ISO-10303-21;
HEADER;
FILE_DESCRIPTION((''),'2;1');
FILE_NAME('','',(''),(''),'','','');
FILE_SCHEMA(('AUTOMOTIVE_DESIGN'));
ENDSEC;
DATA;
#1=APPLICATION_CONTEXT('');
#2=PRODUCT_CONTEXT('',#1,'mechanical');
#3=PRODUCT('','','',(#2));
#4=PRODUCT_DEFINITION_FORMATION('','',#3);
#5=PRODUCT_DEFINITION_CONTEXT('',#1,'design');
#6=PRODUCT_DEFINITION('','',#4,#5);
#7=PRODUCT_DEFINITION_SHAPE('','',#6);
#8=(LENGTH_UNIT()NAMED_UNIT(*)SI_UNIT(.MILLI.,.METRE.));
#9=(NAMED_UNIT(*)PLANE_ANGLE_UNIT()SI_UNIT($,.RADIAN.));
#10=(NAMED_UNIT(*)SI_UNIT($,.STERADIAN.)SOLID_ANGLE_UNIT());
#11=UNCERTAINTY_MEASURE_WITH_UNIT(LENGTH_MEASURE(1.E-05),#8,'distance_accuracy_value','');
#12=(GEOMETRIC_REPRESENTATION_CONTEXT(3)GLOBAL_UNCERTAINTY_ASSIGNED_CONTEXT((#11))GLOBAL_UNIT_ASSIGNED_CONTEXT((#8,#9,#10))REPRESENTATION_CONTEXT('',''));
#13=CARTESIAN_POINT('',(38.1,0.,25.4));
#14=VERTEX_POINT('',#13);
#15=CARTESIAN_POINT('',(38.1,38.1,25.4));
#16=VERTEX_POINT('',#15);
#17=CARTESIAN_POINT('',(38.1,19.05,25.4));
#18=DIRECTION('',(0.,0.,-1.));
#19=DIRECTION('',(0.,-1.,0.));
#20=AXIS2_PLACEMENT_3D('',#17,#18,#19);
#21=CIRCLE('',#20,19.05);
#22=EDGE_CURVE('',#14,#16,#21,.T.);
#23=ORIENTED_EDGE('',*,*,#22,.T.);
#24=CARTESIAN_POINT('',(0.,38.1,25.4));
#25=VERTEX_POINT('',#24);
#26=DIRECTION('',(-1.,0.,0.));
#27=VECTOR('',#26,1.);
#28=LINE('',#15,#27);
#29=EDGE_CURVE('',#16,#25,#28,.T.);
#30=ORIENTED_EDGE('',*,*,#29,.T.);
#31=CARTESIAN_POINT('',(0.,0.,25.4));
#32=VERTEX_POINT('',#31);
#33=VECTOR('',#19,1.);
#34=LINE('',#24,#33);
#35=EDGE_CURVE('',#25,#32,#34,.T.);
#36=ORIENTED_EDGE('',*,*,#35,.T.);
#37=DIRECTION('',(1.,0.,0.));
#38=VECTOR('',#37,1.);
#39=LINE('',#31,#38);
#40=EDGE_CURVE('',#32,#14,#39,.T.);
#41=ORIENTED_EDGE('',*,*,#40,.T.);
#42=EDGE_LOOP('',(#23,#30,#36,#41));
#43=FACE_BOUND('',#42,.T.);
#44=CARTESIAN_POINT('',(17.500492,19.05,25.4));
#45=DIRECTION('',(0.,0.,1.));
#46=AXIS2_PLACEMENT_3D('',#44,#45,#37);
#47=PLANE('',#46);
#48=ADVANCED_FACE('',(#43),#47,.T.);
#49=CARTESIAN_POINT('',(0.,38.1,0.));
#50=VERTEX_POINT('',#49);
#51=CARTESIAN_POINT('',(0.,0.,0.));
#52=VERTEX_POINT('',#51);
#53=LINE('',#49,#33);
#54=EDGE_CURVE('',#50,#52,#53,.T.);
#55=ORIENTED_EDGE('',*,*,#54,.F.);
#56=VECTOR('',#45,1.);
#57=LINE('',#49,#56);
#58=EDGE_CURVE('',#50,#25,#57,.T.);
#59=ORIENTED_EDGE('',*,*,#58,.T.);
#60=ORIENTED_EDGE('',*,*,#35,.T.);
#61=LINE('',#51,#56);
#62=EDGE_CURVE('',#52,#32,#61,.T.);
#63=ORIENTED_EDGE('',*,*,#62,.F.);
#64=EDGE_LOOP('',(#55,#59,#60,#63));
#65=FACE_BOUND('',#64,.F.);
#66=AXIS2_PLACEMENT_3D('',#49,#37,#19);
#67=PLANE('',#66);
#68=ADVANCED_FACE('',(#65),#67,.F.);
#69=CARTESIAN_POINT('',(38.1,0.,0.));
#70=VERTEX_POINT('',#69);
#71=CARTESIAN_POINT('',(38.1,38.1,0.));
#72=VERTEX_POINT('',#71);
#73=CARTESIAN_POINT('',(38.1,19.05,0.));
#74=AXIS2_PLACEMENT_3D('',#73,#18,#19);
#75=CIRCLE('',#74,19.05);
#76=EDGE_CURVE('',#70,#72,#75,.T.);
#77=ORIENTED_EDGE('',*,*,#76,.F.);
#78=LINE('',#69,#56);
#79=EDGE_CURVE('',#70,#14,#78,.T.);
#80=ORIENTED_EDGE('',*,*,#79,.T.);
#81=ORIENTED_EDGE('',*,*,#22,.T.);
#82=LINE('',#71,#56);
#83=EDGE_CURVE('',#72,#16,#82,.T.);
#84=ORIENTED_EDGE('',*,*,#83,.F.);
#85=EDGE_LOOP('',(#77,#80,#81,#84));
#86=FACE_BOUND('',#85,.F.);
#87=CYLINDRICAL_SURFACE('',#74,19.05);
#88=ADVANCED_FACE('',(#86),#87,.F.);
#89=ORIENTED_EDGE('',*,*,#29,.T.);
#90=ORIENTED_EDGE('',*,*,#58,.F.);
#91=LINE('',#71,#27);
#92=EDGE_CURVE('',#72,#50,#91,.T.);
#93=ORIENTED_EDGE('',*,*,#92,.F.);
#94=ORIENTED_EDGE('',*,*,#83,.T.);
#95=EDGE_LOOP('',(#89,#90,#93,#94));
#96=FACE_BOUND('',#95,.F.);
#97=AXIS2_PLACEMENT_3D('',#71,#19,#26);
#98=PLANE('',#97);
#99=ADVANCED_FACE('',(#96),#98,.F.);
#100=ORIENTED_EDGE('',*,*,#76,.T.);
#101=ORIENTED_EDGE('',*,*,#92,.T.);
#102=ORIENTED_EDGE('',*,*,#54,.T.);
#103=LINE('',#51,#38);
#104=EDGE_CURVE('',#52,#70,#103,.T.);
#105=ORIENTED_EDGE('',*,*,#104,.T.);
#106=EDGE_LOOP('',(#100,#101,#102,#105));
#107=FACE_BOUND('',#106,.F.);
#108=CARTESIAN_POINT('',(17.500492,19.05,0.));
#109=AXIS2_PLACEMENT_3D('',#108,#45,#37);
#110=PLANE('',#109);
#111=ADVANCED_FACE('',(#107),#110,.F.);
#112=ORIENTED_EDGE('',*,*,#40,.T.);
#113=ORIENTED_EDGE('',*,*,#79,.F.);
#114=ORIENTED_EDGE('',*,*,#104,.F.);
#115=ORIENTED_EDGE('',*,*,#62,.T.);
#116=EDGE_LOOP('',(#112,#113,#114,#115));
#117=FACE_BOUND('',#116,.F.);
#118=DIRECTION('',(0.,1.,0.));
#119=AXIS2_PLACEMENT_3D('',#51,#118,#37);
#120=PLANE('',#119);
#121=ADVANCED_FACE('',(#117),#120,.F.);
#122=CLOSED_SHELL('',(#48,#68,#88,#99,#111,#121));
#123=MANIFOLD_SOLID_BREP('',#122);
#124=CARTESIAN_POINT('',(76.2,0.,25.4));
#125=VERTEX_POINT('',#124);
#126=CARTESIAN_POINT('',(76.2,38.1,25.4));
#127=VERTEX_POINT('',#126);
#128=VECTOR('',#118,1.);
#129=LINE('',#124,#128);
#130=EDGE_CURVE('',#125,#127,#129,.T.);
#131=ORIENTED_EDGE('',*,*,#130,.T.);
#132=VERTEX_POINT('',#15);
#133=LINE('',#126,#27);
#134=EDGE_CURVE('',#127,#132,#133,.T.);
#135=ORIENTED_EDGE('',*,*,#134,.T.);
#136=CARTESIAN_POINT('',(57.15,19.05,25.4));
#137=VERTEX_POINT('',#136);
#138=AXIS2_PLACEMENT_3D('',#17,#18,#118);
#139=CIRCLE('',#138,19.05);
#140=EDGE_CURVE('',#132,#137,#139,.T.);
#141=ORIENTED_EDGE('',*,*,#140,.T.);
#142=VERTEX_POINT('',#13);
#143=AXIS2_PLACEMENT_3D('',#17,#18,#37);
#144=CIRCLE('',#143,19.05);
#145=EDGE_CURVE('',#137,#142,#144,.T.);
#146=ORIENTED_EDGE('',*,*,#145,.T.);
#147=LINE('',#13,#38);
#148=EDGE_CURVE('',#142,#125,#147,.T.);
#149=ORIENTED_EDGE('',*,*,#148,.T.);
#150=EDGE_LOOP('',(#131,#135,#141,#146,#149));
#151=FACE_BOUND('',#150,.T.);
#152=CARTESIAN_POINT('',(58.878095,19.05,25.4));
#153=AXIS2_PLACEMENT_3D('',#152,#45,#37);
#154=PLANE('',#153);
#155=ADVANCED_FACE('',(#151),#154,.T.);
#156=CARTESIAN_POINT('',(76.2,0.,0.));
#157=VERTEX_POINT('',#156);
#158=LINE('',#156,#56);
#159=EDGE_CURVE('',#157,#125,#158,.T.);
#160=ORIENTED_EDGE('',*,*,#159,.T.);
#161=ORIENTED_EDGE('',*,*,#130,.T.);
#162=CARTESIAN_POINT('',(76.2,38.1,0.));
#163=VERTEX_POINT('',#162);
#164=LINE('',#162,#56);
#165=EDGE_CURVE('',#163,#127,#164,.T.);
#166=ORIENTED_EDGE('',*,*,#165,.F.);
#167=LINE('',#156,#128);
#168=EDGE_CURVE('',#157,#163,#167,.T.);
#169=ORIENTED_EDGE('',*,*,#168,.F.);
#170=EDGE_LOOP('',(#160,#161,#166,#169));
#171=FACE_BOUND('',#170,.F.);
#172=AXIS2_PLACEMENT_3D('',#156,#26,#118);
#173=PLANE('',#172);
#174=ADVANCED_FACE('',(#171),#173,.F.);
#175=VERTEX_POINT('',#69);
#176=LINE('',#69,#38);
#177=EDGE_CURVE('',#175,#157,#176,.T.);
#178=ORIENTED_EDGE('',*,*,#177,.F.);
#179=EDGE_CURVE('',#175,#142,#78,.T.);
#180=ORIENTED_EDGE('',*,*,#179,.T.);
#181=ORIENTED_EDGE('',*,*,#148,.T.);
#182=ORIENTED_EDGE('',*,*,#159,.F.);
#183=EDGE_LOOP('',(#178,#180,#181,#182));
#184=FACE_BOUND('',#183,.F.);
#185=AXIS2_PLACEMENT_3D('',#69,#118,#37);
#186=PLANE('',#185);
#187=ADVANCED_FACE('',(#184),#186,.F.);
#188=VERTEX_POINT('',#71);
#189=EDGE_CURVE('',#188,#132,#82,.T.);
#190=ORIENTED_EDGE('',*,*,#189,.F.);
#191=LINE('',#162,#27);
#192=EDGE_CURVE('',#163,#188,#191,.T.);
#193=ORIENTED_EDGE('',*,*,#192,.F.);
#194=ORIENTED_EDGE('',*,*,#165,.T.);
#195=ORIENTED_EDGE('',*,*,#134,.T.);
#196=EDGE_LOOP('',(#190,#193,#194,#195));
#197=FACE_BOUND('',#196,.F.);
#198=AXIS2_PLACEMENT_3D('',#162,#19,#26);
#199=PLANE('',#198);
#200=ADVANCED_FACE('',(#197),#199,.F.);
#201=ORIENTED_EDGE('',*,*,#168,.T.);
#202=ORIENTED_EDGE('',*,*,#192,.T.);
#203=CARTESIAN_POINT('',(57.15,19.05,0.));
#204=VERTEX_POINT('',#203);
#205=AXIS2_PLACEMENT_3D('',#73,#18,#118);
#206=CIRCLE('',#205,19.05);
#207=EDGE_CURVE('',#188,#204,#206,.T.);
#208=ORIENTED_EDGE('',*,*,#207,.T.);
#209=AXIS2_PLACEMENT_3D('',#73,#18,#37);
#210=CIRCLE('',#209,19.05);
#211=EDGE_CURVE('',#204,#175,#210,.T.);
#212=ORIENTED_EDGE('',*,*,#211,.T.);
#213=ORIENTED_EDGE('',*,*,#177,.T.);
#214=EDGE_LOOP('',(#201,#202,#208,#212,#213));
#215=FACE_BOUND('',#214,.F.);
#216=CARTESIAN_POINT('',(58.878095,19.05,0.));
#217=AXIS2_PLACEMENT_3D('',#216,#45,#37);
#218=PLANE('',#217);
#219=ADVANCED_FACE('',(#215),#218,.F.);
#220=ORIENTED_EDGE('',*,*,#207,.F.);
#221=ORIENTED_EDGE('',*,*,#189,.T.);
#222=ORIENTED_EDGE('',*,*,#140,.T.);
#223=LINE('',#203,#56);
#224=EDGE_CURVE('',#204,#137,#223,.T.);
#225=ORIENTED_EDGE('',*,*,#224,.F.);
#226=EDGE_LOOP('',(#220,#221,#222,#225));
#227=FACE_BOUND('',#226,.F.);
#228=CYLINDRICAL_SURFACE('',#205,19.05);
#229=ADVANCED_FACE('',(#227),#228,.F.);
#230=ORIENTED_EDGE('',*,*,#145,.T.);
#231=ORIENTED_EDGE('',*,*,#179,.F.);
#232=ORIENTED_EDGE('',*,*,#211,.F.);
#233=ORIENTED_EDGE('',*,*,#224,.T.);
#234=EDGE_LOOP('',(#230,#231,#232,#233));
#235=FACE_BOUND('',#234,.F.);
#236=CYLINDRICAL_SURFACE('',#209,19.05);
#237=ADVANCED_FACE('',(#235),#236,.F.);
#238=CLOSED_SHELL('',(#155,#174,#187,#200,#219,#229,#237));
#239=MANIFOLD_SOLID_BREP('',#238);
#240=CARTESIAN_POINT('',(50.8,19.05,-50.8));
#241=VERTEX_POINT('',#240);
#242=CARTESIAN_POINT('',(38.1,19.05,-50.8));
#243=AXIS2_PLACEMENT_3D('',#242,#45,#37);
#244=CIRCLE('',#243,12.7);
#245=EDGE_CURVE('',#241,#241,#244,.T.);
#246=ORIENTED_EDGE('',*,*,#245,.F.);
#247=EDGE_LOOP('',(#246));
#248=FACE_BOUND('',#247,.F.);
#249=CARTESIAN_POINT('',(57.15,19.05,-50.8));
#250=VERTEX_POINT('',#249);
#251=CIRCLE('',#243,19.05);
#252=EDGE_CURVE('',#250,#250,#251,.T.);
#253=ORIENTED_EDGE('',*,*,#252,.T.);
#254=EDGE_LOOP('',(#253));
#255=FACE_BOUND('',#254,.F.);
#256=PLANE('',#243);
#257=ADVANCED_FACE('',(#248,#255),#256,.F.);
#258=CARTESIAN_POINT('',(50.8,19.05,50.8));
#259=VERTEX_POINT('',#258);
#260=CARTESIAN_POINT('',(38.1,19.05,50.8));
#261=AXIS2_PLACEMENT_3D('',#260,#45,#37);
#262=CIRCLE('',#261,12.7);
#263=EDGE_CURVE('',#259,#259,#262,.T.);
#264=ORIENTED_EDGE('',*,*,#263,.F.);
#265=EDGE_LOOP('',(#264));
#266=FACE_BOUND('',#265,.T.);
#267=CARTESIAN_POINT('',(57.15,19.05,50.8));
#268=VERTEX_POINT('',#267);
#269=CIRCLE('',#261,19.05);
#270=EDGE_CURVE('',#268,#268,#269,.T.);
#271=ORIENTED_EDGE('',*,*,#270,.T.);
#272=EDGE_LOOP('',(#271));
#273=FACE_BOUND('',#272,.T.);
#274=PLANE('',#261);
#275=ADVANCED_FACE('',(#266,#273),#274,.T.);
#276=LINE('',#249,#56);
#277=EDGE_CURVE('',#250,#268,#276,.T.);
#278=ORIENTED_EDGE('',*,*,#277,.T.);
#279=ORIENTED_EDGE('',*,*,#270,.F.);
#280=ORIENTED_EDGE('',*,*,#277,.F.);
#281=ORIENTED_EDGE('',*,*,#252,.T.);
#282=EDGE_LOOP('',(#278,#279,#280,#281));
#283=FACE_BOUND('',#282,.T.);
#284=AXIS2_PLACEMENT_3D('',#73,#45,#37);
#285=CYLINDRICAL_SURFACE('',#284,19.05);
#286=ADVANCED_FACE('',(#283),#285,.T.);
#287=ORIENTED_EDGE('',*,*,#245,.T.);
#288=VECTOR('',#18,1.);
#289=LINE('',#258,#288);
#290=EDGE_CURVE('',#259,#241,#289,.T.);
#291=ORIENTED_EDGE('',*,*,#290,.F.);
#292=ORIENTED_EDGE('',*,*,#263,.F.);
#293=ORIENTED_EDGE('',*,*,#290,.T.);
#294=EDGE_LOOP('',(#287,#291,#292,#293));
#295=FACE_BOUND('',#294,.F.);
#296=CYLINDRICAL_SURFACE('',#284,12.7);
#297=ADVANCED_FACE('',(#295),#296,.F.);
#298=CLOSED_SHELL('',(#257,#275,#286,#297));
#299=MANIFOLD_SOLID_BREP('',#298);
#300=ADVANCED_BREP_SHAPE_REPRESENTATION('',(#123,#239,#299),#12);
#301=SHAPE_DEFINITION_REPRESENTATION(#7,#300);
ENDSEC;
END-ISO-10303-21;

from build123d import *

# Parameters (mm, degrees)
F1_DEPTH = 25.4
F0_R     = 9.525
F2_DEPTH = 50.8
F3_R     = 12.7
F4_DEPTH = 50.801
F5_DEPTH = 50.8


with BuildPart() as f1:
    # F0 (on Top) → F1 (new body)
    with BuildSketch(Plane.XY):
        with BuildLine():
            Line((0, 38.1), (0, 0))
            Line((0, 0), (38.1, 0))
            ThreePointArc((38.1, 0), (19.05, 19.05), (38.1, 38.1))
            Line((38.1, 38.1), (0, 38.1))
        make_face()
    extrude(amount=F1_DEPTH)


with BuildPart() as f1b:
    # F0 (on Top) → F1, piece 2 (new body)
    with BuildSketch(Plane.XY):
        with BuildLine():
            ThreePointArc((57.15, 19.05), (51.5703841816, 5.5796158184), (38.1, 0))
            Line((38.1, 0), (76.2, 0))
            Line((76.2, 0), (76.2, 38.1))
            Line((76.2, 38.1), (38.1, 38.1))
            ThreePointArc((38.1, 38.1), (51.5703841816, 32.5203841816), (57.15, 19.05))
        make_face()
    extrude(amount=F1_DEPTH)


with BuildPart() as f2:
    # F0 (on Top) → F2 (new body)
    with BuildSketch(Plane.XY):
        with BuildLine():
            ThreePointArc((38.1, 38.1), (19.05, 19.05), (38.1, 0))
            ThreePointArc((38.1, 0), (51.5703841816, 5.5796158184), (57.15, 19.05))
            ThreePointArc((57.15, 19.05), (51.5703841816, 32.5203841816), (38.1, 38.1))
        make_face()
        with Locations((38.1, 19.05)):
            Circle(F0_R, mode=Mode.SUBTRACT)
        with Locations((38.1, 19.05)):
            Circle(F0_R)
    extrude(amount=F2_DEPTH)

    # F3 (on face) → F4 (cut, through all)
    with BuildSketch(Plane.XY.offset(50.8)):
        with Locations((38.1, 19.05)):
            Circle(F3_R)
    extrude(amount=-F4_DEPTH, mode=Mode.SUBTRACT)

    # F5 (add): a face of the model
    f5_faces = [f2.faces().sort_by_distance(p)[0] for p in [
        (38.1, 37.5611846327, 0),
    ]]
    extrude(f5_faces, amount=F5_DEPTH)


solid = Compound([f1.part, f1b.part, f2.part])
